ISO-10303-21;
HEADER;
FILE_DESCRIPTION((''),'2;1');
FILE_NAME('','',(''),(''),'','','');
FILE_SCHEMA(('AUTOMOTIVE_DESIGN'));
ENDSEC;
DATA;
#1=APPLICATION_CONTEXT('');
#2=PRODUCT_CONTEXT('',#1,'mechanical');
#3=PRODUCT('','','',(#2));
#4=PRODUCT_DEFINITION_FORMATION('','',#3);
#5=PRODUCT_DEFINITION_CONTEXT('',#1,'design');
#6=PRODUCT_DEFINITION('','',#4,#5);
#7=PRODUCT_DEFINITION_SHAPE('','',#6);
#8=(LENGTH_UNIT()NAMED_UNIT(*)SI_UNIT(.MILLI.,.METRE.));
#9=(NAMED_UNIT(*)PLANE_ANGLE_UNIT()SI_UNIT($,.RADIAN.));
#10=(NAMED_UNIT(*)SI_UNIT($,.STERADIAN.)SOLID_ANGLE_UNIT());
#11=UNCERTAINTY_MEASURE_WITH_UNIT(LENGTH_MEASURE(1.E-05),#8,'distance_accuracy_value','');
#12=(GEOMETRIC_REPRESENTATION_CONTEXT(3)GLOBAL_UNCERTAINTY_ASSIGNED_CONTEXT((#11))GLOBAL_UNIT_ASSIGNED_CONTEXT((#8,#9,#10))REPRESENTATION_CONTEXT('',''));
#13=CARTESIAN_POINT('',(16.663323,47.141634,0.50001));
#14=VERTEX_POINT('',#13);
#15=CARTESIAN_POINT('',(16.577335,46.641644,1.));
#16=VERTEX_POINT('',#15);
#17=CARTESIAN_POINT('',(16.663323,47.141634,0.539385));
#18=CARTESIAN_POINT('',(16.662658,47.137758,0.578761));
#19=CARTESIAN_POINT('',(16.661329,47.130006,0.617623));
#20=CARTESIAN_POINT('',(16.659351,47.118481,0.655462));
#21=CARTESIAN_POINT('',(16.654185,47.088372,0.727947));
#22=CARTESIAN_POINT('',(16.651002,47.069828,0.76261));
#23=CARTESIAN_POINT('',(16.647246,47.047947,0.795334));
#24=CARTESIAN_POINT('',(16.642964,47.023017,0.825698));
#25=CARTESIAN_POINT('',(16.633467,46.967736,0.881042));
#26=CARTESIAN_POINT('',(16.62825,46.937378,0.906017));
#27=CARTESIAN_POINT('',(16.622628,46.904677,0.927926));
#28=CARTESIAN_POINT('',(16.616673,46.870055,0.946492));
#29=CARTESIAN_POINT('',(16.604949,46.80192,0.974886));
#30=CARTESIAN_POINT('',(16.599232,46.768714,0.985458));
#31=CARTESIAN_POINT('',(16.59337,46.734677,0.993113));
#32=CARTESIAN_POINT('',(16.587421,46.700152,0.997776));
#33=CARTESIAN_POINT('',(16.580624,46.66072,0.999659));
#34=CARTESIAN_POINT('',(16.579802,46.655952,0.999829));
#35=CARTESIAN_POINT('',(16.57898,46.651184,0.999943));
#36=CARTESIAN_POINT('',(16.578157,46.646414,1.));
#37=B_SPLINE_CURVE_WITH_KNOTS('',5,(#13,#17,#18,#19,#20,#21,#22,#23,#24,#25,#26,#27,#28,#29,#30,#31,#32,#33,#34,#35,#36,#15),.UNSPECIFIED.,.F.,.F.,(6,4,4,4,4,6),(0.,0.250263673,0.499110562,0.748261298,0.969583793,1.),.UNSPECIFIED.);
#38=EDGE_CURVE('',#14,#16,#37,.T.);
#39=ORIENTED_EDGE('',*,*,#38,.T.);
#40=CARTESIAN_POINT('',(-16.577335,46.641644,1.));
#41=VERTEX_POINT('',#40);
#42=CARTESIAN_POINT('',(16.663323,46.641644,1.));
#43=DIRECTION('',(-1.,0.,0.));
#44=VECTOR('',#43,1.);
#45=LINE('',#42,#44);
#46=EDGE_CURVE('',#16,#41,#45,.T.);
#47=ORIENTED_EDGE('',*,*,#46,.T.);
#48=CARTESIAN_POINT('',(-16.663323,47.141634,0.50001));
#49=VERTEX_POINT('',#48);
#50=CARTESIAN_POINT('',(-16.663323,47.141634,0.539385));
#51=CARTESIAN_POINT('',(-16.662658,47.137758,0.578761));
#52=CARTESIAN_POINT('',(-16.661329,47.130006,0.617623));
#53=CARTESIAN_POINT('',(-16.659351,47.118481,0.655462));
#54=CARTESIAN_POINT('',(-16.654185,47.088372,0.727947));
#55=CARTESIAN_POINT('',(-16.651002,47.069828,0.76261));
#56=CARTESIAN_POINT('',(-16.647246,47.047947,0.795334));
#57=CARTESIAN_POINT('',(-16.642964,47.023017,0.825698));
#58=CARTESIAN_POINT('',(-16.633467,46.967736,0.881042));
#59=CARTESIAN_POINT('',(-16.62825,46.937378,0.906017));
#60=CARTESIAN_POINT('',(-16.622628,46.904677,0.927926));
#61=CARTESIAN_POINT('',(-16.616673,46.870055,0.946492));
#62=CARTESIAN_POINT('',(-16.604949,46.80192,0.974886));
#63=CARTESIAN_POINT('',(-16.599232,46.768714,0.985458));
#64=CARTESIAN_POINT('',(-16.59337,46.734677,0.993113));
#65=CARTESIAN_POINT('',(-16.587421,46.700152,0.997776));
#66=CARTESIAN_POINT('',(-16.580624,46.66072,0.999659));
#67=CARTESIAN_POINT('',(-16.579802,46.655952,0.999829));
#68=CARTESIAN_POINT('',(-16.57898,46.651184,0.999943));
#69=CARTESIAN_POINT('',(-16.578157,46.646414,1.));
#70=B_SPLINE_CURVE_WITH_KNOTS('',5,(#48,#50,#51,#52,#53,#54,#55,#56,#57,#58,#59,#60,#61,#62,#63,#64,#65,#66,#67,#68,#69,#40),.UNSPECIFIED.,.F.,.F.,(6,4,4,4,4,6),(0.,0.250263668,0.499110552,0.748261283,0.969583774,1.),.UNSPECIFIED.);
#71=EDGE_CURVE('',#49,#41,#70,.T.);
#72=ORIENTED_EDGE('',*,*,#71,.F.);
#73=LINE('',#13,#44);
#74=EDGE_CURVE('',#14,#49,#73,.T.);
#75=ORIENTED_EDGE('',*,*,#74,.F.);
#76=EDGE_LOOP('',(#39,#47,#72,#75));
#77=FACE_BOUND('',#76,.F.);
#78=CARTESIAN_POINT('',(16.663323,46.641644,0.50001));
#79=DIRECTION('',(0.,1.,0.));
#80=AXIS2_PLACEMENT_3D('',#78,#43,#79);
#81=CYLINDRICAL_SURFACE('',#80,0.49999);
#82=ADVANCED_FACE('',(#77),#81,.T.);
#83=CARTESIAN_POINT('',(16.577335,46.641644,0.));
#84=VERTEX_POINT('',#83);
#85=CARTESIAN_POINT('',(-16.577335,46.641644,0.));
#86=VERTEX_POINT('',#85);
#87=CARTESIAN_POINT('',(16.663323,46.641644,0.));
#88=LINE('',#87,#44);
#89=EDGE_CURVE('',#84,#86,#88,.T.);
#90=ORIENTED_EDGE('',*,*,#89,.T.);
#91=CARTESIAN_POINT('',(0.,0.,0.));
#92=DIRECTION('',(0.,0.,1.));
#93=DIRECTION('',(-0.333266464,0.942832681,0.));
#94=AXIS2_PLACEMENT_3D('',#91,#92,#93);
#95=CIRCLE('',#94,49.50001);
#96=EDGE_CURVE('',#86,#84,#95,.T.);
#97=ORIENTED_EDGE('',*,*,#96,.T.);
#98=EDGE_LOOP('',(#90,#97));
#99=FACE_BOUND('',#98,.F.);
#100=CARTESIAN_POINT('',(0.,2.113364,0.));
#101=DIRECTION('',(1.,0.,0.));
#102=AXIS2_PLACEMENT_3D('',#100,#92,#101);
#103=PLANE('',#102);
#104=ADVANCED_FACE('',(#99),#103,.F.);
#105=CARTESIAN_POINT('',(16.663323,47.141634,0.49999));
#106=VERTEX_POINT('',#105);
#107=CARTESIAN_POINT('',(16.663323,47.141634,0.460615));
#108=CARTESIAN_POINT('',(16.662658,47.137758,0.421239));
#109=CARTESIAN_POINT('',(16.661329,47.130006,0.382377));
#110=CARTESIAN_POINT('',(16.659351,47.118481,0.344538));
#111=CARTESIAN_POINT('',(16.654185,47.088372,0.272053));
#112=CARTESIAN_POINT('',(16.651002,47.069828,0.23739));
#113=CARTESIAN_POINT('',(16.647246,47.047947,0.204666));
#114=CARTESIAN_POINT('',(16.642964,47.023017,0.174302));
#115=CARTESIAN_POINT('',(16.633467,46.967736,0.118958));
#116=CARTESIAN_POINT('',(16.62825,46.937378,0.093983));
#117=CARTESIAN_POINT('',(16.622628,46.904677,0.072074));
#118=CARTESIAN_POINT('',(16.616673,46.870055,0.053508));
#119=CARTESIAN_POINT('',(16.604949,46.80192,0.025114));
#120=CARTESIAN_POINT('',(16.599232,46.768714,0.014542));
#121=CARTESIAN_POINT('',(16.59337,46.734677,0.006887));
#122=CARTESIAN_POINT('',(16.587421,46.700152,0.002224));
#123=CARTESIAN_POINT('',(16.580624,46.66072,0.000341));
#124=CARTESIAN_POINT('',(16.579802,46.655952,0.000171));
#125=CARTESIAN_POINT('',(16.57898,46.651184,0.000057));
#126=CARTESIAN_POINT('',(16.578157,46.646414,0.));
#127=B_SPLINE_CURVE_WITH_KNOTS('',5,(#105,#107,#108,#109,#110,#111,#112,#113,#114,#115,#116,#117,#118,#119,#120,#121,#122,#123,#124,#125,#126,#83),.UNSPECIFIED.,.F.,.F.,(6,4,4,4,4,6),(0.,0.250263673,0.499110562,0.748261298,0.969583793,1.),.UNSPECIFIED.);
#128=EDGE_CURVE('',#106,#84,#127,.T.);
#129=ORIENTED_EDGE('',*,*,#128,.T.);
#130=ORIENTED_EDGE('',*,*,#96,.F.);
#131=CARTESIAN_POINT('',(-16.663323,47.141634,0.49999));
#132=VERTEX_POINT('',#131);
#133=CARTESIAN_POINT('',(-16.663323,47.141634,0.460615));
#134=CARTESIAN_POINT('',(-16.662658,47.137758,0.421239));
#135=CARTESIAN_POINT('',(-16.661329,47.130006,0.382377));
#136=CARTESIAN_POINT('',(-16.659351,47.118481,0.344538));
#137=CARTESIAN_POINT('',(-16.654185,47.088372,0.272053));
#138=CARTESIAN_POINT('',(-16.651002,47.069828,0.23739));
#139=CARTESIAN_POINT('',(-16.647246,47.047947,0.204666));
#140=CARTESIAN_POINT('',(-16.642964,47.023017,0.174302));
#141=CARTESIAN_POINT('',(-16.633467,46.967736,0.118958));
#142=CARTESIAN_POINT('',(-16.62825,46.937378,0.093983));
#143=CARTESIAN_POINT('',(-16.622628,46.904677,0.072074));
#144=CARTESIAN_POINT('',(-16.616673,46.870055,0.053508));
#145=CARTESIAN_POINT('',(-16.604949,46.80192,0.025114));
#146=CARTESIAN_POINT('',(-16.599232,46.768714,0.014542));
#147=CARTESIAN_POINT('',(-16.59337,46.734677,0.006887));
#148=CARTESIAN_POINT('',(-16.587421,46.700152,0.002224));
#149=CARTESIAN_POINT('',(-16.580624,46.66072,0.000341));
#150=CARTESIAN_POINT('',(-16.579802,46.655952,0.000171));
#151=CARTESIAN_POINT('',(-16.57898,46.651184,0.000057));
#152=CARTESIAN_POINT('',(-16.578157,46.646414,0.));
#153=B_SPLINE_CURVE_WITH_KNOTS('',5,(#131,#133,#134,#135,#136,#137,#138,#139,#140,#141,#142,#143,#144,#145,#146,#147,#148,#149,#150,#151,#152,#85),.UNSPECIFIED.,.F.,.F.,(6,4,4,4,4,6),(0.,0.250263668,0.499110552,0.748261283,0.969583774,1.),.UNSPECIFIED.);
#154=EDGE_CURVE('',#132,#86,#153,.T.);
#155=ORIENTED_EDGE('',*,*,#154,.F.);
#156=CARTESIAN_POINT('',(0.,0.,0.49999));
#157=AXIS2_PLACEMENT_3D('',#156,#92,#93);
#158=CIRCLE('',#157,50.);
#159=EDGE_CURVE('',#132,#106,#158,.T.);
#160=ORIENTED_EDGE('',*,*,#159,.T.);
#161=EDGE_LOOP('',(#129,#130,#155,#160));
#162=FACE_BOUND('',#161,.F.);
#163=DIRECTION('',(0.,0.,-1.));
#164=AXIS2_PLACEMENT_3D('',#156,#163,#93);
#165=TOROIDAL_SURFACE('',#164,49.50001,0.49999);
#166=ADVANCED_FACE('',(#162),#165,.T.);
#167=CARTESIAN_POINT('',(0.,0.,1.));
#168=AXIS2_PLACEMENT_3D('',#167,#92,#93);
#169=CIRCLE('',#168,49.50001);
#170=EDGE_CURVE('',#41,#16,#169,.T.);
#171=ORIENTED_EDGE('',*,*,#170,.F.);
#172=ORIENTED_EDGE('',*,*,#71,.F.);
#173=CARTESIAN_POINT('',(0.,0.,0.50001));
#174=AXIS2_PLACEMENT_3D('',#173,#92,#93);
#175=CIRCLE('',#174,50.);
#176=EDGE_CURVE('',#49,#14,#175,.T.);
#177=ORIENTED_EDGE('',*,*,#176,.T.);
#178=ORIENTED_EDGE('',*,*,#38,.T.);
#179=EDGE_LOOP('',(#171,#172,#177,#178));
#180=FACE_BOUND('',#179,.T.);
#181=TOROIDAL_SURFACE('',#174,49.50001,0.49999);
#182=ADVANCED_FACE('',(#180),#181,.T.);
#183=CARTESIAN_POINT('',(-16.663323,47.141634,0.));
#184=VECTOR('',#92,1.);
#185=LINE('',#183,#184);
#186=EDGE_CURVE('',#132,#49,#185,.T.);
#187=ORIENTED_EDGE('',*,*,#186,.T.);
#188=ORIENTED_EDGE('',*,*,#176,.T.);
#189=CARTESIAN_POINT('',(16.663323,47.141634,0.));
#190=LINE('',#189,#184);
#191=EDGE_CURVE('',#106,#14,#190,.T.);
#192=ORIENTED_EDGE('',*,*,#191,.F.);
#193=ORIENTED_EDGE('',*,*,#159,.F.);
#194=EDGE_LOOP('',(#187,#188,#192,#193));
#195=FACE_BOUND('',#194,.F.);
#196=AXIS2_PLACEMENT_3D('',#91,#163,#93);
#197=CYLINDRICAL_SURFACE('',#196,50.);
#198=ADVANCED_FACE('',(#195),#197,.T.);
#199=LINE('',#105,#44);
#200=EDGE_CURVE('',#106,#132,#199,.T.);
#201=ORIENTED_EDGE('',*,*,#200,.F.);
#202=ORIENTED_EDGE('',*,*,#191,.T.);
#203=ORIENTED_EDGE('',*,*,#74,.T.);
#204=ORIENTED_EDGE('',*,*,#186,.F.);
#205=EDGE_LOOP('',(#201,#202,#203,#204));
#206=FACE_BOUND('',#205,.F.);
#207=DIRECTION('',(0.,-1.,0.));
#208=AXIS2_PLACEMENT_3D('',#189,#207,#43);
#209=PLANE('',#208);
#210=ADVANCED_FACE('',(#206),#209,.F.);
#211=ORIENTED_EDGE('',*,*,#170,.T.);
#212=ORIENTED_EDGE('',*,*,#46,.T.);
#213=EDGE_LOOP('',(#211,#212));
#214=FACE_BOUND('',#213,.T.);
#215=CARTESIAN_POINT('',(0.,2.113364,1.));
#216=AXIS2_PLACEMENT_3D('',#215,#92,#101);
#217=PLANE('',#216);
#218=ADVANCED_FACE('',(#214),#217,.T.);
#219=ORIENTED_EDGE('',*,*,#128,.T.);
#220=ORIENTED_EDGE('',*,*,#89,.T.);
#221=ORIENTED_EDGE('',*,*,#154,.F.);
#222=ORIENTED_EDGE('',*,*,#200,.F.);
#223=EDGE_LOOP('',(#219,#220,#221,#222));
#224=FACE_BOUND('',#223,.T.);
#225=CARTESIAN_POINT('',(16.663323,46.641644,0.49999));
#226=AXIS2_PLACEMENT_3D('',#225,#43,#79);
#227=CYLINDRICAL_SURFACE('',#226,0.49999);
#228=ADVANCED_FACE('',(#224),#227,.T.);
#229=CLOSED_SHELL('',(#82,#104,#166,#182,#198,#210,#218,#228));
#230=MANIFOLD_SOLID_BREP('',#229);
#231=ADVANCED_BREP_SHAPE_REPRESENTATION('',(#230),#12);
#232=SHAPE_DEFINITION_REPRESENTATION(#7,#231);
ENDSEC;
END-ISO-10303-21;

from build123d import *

# Parameters (mm, degrees)
F1_DEPTH = 1
F2_R     = 0.49999


# Not quite as in the source:
# - a fillet or chamfer is up to 0.001 mm smaller than in the source, because OpenCascade refuses the exact size


with BuildPart() as f1:
    # F0 (on Top) → F1 (new body)
    with BuildSketch(Plane.XY):
        with BuildLine():
            Line((16.6633232089, 47.1416340365), (-16.6633232089, 47.1416340365))
            ThreePointArc((-16.6633232089, 47.1416340365), (0, -50), (16.6633232089, 47.1416340365))
        make_face()
    extrude(amount=F1_DEPTH)

    # F2 (radius 0.5 in the source; OpenCascade refuses exactly that, so slightly less here)
    f2_edges = [f1.edges().sort_by_distance(p)[0] for p in [
        (0, 47.141634, 1),
        (0, -50, 1),
        (0, 47.141634, 0),
        (0, -50, 0),
    ]]
    fillet(f2_edges, radius=F2_R)


solid = f1.part
